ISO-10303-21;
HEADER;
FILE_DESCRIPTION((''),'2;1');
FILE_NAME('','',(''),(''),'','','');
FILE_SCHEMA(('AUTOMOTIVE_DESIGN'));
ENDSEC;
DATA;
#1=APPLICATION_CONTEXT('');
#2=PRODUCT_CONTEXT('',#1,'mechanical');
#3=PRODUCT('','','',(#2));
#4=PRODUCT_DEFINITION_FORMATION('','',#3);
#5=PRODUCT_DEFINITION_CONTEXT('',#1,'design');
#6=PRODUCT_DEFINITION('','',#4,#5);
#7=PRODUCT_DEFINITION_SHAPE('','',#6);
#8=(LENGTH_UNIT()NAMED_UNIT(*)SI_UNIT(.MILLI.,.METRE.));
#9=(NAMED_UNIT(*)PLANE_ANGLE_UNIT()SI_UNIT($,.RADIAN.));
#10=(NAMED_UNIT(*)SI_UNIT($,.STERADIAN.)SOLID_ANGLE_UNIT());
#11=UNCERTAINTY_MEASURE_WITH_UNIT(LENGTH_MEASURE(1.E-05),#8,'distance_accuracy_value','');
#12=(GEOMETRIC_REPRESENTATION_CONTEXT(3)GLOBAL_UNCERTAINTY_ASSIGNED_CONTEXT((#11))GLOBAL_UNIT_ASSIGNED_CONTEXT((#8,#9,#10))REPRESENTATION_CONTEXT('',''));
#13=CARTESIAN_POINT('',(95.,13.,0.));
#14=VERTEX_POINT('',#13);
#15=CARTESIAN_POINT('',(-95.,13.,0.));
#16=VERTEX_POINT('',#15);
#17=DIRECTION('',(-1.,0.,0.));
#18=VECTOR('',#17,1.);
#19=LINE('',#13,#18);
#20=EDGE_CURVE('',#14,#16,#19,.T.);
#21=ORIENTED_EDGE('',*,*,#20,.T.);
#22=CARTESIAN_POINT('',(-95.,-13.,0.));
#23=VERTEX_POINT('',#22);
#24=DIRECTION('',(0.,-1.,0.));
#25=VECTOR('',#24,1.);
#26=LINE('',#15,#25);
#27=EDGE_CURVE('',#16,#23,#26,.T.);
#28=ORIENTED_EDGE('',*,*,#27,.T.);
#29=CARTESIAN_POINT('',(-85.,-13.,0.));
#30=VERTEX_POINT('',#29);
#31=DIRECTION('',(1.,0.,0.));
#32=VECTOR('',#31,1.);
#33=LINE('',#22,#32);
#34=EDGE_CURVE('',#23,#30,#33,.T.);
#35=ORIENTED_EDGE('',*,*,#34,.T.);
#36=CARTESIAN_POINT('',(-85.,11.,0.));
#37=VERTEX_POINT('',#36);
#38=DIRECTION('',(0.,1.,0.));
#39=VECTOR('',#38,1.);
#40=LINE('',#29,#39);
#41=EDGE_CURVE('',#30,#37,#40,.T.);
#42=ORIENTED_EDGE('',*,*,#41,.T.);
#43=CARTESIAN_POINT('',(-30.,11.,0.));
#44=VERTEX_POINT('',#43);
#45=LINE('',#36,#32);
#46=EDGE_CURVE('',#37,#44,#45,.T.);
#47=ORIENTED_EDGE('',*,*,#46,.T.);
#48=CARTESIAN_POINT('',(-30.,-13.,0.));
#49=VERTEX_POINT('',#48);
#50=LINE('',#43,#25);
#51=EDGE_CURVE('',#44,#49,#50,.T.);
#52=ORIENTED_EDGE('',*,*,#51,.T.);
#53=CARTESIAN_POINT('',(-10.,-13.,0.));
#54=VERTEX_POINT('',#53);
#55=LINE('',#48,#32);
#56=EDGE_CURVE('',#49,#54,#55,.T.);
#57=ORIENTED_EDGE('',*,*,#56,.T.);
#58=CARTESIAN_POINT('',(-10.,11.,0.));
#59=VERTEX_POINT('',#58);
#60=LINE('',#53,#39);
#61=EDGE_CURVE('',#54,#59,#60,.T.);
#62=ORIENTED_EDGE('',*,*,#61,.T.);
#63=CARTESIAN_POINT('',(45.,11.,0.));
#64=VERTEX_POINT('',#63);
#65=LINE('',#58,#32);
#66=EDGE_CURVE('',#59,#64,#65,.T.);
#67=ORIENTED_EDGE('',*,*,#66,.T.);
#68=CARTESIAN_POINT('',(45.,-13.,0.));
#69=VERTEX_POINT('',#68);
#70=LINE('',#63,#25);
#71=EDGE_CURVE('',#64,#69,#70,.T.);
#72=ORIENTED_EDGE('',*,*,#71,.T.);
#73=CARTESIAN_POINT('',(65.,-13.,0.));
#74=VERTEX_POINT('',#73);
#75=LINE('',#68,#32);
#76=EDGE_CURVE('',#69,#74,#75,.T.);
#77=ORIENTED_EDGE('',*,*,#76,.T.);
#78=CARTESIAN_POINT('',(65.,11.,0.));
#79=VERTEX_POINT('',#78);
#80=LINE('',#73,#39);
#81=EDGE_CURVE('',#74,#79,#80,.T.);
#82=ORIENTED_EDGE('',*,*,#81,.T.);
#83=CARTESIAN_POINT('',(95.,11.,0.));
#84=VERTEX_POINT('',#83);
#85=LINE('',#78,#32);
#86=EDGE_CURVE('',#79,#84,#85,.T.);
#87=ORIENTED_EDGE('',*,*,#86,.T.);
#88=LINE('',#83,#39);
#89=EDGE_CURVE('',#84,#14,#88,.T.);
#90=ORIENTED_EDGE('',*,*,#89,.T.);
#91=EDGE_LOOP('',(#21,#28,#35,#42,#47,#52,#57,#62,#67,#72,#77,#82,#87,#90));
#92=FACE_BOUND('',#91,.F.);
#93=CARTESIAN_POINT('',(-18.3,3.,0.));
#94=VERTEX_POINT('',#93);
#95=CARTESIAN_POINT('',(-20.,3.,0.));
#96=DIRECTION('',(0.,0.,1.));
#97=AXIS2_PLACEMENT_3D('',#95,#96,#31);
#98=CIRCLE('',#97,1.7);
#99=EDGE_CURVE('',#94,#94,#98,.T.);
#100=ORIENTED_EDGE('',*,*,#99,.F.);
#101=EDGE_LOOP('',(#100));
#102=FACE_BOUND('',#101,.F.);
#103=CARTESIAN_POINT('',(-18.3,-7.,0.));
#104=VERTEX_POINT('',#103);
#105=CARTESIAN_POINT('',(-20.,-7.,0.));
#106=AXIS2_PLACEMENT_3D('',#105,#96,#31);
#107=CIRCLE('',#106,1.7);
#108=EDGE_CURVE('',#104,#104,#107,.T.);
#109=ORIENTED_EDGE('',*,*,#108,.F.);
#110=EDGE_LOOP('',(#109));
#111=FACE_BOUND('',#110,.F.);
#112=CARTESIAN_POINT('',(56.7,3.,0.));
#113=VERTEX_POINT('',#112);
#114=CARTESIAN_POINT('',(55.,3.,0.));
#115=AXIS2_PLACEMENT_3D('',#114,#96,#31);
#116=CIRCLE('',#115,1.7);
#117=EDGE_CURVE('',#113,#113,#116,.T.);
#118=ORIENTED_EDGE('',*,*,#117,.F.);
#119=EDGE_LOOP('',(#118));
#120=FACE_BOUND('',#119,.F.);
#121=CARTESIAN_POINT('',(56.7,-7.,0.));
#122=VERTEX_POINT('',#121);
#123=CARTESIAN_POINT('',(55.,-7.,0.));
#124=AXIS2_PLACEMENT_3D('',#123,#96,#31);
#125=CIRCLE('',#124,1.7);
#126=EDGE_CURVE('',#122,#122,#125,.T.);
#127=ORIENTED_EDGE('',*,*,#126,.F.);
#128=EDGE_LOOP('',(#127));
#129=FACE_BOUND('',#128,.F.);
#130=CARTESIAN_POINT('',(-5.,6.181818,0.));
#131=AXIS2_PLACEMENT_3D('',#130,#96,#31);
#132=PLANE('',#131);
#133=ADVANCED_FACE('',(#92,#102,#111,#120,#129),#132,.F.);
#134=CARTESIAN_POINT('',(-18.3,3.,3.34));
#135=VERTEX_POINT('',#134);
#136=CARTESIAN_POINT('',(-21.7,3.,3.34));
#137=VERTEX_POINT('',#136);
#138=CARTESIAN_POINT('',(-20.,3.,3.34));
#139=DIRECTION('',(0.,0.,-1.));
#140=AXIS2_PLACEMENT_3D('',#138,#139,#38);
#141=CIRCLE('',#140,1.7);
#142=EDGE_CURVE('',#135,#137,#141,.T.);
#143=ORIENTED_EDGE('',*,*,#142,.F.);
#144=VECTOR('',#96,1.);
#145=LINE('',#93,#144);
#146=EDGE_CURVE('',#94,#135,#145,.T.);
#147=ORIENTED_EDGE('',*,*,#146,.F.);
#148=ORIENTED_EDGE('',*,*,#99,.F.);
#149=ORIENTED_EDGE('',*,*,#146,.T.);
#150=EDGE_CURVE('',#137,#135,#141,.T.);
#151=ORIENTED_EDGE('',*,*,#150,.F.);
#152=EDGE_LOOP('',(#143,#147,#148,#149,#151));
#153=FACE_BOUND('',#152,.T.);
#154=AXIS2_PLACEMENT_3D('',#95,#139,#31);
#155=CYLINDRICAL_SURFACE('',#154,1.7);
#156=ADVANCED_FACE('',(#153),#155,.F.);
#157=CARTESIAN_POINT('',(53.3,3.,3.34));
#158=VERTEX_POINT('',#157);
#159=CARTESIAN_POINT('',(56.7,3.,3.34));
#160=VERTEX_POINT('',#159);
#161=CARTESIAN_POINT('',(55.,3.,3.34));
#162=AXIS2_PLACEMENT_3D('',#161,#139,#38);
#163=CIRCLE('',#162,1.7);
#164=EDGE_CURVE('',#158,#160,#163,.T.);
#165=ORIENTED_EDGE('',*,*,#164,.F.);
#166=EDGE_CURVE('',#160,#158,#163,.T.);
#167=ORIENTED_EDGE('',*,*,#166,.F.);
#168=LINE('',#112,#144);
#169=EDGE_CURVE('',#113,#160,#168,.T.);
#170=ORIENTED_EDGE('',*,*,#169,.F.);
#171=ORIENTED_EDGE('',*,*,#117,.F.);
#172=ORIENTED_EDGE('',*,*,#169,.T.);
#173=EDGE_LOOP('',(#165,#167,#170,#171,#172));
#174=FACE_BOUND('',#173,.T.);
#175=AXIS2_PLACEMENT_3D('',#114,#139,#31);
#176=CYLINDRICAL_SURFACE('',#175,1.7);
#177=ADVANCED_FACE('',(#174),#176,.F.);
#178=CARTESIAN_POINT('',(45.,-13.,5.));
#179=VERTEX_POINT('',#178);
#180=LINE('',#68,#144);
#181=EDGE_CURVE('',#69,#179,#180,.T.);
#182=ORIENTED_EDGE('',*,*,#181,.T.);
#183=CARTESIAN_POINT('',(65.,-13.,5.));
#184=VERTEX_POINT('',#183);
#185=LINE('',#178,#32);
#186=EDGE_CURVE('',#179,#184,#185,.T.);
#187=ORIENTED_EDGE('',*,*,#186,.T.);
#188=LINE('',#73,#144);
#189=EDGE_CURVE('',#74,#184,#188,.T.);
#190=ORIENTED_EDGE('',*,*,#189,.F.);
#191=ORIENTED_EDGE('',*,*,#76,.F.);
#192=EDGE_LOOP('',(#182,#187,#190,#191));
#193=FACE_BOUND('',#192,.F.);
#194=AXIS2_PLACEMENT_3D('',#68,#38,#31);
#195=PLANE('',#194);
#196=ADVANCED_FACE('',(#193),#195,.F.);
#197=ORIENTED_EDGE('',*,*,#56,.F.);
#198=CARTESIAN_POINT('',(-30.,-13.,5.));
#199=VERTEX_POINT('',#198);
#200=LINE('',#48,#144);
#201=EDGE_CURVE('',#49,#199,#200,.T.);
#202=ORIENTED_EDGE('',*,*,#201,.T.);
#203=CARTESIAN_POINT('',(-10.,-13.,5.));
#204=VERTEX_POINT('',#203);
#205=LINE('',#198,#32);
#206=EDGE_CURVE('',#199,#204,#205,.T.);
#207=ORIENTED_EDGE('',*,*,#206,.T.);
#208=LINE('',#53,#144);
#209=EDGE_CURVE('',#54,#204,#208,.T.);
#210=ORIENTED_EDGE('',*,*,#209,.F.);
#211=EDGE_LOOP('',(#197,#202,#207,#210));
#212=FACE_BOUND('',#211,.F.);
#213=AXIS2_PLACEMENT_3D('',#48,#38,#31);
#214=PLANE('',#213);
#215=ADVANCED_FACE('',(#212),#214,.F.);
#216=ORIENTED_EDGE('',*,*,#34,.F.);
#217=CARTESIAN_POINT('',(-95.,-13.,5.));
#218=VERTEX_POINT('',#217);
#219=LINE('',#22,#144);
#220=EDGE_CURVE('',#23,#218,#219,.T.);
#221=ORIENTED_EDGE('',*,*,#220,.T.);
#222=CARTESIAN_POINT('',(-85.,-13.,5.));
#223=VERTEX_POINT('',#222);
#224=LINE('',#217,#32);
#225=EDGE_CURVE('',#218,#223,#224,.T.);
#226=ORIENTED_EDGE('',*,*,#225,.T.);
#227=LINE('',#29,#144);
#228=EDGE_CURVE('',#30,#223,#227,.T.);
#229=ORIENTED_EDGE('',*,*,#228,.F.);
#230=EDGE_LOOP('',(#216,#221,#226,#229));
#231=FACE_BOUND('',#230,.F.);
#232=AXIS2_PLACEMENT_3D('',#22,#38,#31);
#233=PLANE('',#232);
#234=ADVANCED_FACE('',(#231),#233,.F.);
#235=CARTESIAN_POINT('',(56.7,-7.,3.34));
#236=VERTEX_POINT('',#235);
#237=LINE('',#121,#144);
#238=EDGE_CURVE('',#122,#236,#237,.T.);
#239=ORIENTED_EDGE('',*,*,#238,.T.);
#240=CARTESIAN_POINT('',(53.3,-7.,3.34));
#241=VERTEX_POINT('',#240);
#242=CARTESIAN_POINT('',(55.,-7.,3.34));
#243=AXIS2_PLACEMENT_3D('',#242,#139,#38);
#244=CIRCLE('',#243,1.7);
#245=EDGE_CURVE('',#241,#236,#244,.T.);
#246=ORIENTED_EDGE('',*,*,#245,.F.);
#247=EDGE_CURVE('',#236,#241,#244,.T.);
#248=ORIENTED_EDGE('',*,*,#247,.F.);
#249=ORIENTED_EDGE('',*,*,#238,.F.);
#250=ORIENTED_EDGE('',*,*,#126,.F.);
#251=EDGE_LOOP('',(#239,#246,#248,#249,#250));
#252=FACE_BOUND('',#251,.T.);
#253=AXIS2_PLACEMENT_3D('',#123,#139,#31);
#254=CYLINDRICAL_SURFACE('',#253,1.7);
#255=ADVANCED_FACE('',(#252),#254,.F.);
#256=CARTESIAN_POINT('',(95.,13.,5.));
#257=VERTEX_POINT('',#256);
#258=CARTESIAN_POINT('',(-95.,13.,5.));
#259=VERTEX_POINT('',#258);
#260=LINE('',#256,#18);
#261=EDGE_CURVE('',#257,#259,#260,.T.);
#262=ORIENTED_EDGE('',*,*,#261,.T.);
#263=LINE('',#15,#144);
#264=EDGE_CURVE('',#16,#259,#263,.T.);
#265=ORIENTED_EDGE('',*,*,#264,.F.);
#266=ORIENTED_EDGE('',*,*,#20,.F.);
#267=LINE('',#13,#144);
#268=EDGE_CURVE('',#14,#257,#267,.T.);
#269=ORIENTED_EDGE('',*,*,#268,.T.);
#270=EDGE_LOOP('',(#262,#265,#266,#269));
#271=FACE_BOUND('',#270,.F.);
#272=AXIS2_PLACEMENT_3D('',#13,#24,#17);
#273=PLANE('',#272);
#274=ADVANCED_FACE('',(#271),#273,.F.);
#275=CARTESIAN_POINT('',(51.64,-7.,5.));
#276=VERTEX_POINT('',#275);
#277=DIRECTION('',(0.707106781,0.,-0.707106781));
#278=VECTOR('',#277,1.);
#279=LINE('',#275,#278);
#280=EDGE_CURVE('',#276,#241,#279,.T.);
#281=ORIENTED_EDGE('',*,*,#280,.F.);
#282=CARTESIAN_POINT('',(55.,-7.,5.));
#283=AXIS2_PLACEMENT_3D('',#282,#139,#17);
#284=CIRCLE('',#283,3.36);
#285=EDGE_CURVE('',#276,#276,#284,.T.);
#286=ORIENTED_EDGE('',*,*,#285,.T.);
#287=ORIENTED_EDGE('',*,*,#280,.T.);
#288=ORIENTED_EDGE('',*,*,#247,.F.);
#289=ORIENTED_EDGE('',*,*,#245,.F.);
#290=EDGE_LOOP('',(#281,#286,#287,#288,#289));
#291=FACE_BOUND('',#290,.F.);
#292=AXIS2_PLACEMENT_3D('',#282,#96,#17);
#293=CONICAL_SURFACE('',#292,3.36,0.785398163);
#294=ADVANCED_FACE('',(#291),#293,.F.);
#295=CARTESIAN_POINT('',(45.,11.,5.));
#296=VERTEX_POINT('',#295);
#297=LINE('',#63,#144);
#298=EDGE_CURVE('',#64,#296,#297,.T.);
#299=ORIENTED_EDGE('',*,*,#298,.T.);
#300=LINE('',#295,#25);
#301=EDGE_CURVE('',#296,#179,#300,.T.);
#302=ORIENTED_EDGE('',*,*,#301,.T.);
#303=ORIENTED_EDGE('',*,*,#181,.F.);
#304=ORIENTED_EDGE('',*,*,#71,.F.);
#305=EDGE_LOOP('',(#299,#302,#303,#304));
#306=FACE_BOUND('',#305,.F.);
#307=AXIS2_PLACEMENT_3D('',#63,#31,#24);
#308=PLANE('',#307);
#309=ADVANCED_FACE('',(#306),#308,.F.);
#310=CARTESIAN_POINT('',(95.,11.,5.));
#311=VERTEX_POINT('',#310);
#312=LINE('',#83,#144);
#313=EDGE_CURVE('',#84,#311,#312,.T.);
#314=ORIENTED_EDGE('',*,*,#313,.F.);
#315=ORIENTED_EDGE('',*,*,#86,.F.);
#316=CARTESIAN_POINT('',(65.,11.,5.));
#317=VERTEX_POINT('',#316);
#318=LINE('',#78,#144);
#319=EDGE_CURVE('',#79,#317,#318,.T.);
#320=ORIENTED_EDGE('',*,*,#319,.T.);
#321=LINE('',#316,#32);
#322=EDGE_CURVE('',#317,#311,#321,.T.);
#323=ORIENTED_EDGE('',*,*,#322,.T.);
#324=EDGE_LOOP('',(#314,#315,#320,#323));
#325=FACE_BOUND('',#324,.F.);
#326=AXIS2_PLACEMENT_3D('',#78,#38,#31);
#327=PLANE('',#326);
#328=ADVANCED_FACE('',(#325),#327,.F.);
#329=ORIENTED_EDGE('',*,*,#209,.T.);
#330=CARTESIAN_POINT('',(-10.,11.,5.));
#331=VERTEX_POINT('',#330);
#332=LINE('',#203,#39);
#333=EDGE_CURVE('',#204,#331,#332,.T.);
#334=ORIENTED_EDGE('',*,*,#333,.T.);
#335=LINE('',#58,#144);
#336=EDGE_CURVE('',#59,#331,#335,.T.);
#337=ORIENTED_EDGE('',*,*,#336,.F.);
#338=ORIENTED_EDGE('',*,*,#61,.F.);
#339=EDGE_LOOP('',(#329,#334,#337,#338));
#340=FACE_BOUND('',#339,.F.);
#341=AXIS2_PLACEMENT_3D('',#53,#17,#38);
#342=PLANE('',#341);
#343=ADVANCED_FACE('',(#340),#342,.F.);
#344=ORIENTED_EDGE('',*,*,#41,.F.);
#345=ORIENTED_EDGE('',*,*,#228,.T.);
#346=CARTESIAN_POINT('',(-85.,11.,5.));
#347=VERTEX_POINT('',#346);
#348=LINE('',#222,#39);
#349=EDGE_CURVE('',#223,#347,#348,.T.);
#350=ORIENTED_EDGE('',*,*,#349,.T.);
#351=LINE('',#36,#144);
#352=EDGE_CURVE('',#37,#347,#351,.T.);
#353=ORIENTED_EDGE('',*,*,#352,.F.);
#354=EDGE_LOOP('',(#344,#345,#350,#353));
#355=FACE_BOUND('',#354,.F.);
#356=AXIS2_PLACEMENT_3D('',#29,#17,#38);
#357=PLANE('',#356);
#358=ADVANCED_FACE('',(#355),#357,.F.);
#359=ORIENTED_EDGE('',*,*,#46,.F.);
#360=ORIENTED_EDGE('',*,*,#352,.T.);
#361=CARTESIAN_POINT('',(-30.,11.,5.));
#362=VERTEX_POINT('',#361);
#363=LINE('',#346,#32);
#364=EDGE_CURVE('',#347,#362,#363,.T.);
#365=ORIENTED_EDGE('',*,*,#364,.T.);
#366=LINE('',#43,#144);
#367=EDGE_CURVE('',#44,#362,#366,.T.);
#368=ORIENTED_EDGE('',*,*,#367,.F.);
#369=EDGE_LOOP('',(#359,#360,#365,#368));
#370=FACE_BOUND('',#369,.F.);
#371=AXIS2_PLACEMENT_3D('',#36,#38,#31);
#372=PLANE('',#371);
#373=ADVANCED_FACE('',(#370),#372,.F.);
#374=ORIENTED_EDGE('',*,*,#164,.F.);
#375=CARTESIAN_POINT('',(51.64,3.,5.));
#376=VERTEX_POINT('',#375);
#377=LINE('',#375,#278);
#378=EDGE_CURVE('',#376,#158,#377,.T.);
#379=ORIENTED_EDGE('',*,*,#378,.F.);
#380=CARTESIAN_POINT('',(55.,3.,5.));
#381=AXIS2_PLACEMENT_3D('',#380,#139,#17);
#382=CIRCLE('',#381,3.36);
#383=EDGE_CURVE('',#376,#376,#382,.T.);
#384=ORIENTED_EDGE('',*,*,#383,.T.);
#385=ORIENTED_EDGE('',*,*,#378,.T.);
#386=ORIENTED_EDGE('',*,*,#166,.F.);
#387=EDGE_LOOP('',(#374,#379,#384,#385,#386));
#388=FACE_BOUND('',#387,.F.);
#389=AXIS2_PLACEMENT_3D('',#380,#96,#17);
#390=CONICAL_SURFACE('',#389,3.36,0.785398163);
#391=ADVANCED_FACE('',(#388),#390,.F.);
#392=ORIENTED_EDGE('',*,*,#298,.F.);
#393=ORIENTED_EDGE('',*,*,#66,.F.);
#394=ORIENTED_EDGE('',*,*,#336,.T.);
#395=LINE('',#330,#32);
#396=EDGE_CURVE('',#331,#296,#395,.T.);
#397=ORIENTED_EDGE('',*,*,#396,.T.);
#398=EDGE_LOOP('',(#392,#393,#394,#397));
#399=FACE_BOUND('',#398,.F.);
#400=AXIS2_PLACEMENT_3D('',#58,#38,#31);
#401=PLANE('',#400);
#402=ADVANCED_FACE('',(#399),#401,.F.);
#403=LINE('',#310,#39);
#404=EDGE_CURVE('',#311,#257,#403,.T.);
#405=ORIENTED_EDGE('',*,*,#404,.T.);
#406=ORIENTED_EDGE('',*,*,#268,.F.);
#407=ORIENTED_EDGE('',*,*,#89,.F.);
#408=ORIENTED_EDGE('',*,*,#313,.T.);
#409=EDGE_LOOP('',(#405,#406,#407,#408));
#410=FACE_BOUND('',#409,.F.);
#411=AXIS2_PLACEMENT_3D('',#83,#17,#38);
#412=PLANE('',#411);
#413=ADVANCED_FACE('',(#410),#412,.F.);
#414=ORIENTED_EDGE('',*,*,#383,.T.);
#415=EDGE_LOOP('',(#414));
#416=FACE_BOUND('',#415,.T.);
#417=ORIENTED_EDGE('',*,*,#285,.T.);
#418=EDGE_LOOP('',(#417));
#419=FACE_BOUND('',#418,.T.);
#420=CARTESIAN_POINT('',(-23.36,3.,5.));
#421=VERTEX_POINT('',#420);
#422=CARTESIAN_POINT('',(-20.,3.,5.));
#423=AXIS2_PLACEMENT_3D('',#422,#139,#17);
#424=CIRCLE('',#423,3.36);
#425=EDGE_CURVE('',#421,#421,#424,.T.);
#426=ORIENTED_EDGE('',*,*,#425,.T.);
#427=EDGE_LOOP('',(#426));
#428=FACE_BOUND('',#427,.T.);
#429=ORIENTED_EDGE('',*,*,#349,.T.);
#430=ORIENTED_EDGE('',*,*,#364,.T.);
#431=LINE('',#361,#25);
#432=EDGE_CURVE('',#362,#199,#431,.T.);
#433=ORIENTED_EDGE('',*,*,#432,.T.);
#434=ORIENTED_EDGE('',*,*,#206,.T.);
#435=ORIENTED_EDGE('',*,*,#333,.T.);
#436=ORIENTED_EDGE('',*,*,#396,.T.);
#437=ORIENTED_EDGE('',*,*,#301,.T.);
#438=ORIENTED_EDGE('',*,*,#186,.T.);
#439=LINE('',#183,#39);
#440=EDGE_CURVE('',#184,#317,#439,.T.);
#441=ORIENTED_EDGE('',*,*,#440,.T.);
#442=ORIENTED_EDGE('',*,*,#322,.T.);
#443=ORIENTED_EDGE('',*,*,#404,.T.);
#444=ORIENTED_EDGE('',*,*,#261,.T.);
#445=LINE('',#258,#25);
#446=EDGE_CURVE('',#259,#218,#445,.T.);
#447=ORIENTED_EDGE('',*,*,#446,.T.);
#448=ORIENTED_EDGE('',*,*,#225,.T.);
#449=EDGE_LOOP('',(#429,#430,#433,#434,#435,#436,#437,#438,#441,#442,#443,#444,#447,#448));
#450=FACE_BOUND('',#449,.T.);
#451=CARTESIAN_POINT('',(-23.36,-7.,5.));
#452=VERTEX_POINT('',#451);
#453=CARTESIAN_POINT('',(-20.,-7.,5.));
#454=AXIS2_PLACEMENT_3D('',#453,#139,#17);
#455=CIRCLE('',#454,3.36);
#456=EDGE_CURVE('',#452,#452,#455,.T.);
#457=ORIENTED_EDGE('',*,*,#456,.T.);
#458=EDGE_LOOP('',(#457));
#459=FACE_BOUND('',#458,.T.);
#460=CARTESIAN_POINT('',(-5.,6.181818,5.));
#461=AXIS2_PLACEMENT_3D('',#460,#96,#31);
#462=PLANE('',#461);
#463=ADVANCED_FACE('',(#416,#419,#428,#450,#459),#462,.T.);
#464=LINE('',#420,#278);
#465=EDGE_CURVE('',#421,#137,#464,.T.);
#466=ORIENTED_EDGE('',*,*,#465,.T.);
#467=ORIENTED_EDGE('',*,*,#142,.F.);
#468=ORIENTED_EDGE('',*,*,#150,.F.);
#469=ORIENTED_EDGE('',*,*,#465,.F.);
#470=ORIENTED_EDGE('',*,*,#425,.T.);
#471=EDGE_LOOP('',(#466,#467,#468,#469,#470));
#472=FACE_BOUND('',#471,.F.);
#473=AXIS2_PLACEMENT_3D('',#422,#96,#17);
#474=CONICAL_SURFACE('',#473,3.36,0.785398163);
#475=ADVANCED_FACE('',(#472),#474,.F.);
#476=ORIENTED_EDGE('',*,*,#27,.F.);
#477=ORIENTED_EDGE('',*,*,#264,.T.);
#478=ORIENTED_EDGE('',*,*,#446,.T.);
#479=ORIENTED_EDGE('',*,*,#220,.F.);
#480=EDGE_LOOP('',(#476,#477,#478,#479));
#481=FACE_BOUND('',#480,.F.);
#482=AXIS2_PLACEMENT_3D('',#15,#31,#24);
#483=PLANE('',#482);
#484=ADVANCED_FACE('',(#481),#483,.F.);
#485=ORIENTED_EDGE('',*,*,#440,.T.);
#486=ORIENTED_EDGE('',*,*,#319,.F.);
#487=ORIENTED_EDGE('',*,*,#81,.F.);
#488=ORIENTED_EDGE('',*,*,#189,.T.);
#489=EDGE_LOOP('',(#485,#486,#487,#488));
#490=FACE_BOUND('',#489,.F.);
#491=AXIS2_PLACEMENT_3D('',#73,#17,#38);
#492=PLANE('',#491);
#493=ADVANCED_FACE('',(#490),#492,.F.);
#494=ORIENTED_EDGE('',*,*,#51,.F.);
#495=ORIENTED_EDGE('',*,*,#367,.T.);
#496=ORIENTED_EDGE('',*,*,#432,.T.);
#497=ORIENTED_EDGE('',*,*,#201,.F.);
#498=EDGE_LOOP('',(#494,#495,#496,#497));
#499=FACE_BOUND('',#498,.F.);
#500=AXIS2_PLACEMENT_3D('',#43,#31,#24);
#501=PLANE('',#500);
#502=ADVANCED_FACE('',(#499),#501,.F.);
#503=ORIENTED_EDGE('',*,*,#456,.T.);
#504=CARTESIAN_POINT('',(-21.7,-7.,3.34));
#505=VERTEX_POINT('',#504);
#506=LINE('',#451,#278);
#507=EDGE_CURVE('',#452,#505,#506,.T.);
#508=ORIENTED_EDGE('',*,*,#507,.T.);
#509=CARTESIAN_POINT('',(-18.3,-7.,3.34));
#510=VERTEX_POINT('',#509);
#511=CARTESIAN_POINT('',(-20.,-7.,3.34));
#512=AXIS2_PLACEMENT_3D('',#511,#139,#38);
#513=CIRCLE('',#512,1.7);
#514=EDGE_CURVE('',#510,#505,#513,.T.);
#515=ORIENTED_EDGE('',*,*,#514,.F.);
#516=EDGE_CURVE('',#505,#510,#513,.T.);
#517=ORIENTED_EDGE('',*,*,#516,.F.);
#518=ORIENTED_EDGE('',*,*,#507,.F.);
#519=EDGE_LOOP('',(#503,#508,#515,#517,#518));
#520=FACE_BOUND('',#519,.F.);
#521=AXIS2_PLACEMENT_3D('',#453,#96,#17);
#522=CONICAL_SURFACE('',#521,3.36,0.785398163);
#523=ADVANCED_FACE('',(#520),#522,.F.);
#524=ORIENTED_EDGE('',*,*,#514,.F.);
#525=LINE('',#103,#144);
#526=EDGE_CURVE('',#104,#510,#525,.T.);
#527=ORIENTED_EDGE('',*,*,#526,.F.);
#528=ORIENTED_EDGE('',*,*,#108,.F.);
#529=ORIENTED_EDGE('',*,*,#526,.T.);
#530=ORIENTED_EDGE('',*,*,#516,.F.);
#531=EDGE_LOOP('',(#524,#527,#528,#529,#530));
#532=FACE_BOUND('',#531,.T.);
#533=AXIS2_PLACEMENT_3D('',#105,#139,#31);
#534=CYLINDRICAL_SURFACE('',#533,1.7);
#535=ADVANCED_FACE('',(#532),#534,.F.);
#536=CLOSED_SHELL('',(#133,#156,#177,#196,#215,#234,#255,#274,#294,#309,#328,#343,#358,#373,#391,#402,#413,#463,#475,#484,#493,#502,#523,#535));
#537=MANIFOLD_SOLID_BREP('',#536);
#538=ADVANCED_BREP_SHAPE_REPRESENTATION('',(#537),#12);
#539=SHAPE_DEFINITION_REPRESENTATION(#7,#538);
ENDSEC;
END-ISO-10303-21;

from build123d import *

# Parameters (mm, degrees)
F0_R           = 1.7
F1_DEPTH       = 5
F3_D           = 3.4
F3_CSINK_D     = 6.72
F3_CSINK_ANGLE = 90


with BuildPart() as f1:
    # F0 (on Top) → F1 (new body)
    with BuildSketch(Plane.XY):
        Polygon((95, 13), (-95, 13), (-95, -13), (-85, -13), (-85, 11), (-30, 11), (-30, 3), (-30, -13), (-10, -13), (-10, 11), (45, 11), (45, 3), (45, -13), (65, -13), (65, 11), (95, 11), align=None)
        with Locations((-20, -7)):
            Circle(F0_R, mode=Mode.SUBTRACT)
        with Locations((55, -7)):
            Circle(F0_R, mode=Mode.SUBTRACT)
        with Locations((-20, 3)):
            Circle(F0_R, mode=Mode.SUBTRACT)
        with Locations((55, 3)):
            Circle(F0_R, mode=Mode.SUBTRACT)
    extrude(amount=F1_DEPTH)

    # F3 (through all)
    with Locations(Plane.XY.offset(5)):
        with Locations((-20, 3), (-20, -7), (55, 3), (55, -7)):
            CounterSinkHole(F3_D / 2, F3_CSINK_D / 2, counter_sink_angle=F3_CSINK_ANGLE)


solid = f1.part
